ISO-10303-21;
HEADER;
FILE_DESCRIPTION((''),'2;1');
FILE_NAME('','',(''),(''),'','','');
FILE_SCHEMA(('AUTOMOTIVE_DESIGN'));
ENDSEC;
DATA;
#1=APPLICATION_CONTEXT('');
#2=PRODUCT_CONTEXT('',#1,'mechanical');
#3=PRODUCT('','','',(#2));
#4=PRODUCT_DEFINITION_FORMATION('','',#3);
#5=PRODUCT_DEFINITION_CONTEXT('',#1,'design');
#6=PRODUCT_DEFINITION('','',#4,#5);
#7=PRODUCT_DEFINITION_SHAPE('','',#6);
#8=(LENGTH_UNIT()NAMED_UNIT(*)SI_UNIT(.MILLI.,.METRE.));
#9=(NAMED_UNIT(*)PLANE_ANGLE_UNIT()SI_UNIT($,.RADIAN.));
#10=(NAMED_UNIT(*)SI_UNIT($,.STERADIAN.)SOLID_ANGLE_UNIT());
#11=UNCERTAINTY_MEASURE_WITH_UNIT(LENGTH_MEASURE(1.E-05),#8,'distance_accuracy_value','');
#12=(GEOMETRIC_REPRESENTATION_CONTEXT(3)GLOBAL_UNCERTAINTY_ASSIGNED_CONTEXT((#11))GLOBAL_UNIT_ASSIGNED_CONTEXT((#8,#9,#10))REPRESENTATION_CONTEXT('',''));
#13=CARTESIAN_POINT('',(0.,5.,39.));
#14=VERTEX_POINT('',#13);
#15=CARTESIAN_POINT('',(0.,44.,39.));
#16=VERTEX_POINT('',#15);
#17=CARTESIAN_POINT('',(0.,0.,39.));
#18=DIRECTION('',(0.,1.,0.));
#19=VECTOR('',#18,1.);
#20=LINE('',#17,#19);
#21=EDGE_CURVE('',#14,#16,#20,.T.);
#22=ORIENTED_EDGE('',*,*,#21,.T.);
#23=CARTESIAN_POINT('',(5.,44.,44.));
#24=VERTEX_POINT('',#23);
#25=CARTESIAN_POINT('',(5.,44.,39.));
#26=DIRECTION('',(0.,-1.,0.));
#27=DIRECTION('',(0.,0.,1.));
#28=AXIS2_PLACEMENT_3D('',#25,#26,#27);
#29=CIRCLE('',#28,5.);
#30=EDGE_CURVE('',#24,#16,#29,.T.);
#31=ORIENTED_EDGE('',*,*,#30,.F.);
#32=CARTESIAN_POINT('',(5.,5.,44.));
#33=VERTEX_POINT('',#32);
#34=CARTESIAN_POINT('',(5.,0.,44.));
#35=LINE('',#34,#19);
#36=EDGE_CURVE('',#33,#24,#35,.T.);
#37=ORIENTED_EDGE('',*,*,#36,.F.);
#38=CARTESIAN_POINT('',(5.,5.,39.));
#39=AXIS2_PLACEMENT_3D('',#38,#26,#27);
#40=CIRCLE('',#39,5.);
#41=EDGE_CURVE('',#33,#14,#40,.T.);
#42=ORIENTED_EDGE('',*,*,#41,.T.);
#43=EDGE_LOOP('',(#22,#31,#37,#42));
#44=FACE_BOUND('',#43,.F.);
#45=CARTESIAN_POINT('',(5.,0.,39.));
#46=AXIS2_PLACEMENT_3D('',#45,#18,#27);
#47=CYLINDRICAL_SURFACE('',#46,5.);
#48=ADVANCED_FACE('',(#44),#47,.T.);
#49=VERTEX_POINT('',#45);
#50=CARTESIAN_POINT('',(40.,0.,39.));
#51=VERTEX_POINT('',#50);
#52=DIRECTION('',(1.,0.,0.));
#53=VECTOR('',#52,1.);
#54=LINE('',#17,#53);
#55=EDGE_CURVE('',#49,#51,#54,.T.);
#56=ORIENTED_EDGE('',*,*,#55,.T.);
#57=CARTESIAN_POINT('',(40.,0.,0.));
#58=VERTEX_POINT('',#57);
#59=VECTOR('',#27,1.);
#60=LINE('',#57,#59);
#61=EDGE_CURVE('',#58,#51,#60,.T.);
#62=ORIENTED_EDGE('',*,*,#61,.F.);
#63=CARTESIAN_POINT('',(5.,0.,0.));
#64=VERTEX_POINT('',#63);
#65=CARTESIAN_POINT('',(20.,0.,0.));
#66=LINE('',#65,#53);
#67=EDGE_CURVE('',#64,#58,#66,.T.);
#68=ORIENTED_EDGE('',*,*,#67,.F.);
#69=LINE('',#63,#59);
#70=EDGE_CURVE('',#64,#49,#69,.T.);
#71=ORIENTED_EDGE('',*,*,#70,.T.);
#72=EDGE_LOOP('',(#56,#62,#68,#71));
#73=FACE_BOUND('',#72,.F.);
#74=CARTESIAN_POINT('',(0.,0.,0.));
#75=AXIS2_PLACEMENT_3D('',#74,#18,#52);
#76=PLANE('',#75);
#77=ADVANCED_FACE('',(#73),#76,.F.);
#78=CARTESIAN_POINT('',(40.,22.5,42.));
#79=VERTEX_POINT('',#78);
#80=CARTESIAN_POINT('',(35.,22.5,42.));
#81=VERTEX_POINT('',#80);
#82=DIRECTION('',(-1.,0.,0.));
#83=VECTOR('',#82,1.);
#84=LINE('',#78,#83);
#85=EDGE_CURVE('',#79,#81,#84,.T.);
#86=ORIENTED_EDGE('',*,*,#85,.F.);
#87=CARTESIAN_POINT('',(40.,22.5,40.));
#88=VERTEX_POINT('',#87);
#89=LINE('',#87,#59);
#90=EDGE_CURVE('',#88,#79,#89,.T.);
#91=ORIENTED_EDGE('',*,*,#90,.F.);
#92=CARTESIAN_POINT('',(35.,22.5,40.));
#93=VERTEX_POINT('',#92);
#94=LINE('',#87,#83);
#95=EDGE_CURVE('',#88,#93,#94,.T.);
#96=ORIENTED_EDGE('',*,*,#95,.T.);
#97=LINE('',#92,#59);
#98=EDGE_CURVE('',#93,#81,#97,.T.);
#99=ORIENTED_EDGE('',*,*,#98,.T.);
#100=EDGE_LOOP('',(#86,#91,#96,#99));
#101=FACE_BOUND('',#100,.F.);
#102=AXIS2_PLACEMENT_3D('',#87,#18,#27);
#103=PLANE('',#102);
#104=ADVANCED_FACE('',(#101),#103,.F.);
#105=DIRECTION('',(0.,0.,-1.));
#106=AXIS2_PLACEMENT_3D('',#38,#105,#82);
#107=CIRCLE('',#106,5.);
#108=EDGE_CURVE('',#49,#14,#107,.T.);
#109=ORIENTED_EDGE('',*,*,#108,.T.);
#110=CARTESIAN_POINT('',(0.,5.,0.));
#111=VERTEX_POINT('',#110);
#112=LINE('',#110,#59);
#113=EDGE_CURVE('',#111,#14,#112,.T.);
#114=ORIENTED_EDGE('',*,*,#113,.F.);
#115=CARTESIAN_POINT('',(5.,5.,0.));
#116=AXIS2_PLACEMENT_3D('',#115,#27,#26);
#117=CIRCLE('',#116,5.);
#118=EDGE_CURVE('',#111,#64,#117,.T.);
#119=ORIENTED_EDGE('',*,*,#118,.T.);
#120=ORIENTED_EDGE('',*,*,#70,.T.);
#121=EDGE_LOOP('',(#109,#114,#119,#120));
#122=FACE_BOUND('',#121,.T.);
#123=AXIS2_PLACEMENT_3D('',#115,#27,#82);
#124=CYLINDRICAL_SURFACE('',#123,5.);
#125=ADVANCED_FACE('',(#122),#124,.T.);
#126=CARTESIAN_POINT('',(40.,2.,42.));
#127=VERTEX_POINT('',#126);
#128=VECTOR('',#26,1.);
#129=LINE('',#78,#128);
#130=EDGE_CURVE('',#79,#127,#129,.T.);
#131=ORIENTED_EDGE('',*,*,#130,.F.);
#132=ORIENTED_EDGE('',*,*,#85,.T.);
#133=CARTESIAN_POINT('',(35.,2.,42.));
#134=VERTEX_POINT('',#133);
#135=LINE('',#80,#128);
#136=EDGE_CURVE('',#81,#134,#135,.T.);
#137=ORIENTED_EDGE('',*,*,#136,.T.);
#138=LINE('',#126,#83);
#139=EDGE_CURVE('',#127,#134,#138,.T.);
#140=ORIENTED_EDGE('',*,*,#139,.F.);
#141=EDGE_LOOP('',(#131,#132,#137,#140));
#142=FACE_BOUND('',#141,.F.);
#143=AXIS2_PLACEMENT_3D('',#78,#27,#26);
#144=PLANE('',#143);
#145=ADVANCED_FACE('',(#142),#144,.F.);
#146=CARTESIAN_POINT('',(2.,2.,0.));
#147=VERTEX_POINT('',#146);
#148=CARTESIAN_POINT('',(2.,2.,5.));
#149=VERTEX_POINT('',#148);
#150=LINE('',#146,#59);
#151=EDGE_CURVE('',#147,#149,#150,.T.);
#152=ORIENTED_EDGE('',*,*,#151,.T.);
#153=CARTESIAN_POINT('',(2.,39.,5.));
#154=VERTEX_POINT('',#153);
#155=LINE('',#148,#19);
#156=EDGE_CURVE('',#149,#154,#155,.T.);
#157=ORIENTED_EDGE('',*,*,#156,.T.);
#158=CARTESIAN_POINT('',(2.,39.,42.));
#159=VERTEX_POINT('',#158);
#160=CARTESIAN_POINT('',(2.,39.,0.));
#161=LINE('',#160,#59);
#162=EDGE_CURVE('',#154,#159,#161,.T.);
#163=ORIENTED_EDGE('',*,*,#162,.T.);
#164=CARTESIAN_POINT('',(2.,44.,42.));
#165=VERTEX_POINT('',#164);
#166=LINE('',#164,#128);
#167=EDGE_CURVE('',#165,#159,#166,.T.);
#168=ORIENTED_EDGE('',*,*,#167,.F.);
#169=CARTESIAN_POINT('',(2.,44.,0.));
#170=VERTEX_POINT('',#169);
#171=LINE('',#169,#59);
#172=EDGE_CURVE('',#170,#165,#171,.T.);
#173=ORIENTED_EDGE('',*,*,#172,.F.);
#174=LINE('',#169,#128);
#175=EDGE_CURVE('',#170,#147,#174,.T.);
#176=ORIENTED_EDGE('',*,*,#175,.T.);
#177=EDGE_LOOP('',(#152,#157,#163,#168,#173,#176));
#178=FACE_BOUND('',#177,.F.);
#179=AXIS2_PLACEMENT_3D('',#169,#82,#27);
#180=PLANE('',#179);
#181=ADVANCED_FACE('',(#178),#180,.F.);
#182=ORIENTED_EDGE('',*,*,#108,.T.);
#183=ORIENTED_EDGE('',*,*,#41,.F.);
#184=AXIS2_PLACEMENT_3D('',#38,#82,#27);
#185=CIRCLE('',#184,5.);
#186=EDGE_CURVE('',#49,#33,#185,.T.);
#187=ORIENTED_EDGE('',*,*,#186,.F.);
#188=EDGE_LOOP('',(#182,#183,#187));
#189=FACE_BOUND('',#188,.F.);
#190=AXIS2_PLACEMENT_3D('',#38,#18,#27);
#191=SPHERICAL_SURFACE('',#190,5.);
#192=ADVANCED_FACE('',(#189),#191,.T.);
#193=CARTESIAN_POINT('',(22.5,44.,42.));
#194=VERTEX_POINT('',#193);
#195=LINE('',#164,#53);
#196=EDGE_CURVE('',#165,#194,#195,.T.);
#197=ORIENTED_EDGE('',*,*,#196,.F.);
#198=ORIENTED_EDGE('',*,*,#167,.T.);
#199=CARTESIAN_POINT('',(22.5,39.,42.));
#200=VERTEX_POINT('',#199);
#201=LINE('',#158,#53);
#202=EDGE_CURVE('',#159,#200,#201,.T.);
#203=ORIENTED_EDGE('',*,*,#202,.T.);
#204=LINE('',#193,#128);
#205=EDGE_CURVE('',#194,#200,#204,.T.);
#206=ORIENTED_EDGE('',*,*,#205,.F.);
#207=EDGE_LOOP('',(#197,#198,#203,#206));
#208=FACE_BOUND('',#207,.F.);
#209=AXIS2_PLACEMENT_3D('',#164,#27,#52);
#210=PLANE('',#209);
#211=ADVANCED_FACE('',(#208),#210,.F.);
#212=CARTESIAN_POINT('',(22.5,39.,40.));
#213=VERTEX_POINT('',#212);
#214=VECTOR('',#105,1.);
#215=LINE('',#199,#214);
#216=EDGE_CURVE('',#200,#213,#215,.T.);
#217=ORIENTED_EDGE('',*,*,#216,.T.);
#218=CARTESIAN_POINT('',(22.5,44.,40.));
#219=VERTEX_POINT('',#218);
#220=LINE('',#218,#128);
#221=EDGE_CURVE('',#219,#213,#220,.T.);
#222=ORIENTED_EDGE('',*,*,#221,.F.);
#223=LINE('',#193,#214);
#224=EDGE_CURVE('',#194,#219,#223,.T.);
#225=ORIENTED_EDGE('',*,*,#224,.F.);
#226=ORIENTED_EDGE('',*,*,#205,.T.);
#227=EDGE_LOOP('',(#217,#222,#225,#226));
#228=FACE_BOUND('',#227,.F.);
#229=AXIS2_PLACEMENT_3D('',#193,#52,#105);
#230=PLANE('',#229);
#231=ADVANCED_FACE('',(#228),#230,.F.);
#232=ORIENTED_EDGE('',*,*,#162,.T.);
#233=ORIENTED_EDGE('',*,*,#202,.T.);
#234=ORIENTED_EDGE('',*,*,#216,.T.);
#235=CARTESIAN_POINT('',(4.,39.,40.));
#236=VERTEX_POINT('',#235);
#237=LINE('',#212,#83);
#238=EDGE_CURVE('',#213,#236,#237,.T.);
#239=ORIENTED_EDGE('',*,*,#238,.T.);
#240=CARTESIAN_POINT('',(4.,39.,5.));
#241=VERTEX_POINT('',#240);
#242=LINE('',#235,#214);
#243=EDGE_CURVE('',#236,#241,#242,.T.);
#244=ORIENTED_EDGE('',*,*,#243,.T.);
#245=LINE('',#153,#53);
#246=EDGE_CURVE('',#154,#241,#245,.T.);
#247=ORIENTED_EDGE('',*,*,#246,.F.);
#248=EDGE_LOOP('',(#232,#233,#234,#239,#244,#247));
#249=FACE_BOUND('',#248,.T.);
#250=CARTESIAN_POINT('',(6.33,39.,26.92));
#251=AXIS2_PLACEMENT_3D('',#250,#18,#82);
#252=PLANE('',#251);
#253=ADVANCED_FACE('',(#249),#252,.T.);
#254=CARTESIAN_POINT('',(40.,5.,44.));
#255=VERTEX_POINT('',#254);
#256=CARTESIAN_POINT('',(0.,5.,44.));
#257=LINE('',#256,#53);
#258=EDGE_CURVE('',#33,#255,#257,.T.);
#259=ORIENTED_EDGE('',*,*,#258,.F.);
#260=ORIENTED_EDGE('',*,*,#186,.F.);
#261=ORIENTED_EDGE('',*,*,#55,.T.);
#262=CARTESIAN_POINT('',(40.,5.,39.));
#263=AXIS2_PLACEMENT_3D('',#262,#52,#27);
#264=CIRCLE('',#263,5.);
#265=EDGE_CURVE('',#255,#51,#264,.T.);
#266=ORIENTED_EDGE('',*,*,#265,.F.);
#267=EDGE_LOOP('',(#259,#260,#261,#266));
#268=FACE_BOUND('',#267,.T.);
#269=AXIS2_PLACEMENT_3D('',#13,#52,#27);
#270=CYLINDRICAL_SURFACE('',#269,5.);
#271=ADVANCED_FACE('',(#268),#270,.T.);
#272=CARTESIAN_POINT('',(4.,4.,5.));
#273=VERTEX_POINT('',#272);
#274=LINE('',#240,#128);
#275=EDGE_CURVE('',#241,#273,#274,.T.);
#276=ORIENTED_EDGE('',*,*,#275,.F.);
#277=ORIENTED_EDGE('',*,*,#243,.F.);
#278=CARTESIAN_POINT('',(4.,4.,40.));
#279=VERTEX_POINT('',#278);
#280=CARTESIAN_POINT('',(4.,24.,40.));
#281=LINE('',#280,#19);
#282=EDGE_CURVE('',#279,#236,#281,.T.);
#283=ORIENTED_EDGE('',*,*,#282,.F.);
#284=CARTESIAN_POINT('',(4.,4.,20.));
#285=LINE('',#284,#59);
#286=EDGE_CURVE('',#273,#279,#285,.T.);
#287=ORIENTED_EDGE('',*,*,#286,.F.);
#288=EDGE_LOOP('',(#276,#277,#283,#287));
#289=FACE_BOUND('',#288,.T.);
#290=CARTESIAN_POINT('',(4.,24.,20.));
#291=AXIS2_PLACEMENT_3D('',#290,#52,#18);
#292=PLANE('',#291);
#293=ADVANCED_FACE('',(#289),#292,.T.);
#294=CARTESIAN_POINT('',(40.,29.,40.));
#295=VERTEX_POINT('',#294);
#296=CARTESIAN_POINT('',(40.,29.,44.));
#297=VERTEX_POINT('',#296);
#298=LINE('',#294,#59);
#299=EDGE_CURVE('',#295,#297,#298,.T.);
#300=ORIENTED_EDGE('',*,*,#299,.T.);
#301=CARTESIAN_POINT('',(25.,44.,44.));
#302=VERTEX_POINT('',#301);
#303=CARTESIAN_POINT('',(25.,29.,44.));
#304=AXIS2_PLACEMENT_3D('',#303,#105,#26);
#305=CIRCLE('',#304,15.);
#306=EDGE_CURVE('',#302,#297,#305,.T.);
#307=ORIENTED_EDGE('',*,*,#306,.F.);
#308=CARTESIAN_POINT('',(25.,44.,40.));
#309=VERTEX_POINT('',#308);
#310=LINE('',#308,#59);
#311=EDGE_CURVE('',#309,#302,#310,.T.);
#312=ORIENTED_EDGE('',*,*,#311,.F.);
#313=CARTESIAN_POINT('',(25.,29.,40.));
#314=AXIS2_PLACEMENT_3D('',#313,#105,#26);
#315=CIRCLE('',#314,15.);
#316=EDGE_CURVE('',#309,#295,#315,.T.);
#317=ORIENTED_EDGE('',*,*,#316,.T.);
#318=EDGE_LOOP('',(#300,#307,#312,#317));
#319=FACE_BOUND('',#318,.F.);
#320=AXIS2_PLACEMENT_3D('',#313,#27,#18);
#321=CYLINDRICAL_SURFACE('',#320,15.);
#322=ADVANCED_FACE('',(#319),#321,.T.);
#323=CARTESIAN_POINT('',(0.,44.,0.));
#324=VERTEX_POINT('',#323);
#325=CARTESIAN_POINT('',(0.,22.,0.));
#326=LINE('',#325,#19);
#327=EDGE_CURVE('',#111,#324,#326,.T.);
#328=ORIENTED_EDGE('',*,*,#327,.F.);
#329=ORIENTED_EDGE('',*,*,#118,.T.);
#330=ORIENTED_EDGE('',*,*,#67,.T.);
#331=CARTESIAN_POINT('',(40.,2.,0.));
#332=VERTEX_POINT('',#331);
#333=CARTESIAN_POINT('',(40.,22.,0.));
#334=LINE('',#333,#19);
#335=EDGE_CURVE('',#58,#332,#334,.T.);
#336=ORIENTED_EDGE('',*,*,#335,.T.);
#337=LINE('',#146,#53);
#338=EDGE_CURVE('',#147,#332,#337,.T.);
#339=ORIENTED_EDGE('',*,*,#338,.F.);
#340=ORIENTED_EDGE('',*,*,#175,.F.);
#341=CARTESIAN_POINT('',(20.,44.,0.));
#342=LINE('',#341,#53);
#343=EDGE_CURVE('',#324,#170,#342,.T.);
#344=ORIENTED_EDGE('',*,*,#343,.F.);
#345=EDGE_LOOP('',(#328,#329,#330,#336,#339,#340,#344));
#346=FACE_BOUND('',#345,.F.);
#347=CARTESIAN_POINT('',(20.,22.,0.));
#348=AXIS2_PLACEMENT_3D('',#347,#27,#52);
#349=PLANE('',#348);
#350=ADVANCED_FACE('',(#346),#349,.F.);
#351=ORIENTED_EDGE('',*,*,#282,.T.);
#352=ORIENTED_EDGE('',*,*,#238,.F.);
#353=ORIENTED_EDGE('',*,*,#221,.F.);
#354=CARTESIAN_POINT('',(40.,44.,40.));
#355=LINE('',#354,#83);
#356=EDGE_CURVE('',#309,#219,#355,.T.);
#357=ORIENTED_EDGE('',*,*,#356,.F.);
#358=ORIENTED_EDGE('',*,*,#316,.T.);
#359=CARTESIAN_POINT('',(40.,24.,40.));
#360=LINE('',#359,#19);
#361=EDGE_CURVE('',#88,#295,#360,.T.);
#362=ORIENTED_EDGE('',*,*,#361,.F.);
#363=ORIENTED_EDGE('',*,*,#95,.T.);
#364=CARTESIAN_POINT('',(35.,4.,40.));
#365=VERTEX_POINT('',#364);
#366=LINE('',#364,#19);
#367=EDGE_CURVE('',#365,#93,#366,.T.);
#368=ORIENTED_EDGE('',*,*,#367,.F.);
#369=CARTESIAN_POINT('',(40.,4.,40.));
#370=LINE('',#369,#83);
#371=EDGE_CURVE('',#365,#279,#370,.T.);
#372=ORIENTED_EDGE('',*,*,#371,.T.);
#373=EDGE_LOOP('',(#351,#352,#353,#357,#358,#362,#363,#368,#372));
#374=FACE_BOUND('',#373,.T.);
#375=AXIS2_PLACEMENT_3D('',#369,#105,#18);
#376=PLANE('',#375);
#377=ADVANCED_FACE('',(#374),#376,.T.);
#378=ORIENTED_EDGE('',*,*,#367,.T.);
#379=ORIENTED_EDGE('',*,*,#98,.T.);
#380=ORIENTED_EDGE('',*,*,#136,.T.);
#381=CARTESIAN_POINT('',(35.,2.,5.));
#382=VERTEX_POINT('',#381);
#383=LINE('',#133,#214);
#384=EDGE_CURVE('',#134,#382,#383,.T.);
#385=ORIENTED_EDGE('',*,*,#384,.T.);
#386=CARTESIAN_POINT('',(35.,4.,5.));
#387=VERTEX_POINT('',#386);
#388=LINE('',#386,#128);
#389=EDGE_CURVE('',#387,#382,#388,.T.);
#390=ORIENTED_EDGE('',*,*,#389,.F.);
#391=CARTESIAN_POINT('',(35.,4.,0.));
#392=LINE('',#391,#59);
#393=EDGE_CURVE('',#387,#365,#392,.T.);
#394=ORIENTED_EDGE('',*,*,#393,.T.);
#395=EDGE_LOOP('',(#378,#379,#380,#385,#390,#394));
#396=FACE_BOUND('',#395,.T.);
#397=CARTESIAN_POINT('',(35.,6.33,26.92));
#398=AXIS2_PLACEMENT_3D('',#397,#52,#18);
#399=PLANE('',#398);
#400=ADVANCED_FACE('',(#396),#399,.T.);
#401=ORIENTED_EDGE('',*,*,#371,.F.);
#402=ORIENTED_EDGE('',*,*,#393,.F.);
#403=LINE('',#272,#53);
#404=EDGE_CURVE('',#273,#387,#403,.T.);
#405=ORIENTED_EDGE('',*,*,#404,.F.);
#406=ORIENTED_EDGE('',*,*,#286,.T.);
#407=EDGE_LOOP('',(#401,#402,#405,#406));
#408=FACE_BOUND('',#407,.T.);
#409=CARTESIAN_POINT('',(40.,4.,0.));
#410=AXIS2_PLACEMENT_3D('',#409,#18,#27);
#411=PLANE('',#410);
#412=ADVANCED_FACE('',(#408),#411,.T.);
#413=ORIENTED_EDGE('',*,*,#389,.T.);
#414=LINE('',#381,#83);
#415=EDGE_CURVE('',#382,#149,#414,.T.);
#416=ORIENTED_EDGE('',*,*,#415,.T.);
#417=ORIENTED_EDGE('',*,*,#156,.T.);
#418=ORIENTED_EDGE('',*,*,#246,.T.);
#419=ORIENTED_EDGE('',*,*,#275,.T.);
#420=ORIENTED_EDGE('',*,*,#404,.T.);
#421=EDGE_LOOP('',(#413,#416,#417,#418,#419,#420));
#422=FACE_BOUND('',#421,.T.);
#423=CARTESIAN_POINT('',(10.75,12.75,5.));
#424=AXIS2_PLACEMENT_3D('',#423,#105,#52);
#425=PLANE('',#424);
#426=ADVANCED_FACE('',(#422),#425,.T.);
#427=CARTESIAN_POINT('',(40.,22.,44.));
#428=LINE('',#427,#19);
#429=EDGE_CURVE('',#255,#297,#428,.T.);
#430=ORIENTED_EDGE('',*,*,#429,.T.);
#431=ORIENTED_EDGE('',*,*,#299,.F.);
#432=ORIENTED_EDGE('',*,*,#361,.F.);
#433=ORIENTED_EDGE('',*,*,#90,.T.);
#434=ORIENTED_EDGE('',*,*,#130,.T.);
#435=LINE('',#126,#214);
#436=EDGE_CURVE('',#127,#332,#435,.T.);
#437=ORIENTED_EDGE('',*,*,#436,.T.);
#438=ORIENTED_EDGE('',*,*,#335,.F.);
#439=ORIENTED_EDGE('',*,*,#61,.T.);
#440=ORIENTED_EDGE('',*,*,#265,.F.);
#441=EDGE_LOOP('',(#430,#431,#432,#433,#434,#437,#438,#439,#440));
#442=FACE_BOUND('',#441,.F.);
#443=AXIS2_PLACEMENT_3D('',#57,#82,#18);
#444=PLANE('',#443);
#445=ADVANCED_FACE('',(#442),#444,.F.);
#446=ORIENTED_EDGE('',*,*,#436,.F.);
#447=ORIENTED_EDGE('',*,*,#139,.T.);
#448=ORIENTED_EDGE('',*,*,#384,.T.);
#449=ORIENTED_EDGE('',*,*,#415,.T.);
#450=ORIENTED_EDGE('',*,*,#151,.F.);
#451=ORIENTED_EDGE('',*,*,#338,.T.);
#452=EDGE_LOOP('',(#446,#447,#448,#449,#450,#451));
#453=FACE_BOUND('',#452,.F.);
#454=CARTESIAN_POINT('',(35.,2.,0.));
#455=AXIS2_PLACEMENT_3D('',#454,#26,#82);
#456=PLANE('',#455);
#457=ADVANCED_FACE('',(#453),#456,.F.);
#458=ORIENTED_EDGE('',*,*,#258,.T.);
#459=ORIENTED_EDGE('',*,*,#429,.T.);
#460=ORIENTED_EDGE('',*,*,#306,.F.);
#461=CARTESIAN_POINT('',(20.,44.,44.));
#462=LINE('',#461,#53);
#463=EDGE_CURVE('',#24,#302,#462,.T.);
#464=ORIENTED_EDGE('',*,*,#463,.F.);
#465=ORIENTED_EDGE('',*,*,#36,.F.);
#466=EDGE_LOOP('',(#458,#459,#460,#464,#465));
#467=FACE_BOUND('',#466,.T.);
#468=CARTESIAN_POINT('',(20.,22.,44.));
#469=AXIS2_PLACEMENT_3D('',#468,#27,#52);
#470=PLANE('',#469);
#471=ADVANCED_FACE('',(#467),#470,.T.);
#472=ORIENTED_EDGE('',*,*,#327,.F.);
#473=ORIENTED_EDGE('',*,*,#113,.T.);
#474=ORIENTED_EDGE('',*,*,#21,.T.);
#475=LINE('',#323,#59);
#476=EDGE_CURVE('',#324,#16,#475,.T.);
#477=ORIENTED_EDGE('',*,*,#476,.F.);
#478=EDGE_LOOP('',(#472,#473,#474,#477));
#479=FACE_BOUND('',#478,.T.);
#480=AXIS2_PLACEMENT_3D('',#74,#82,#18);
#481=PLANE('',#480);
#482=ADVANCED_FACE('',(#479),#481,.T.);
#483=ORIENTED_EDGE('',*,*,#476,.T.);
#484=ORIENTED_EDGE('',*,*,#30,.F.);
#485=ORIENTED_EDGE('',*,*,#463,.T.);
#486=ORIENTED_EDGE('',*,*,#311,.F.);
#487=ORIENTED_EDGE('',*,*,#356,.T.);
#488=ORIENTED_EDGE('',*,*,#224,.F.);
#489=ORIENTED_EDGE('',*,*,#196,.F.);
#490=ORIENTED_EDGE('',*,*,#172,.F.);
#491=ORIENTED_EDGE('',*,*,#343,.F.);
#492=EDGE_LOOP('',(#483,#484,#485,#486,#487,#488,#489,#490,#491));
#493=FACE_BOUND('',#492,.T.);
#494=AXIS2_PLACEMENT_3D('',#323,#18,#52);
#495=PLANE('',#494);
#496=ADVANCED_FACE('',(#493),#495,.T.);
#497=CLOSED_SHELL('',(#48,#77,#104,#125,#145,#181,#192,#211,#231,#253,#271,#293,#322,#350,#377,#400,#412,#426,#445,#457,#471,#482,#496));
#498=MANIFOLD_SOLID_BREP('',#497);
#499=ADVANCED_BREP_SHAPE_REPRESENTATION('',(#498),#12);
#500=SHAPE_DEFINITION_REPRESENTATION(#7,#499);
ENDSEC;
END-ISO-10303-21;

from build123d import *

# Parameters (mm, degrees)
F0_W      = 40
F0_H      = 44
F1_DEPTH  = 44
F2_W      = 40
F2_H      = 40
F3_DEPTH  = 36
F5_DEPTH  = 5
F7_DEPTH  = 5
F8_R      = 15
F9_R      = 5
F11_DEPTH = 5


# Not quite as in the source:
# - a feature names something its author has since deleted; it is built from what else it names


with BuildPart() as f1:
    # F0 (on Top) → F1 (new body)
    with BuildSketch(Plane.XY):
        with Locations((20, 22)):
            Rectangle(F0_W, F0_H)
    extrude(amount=F1_DEPTH)

    # F2 (on face) → F3 (cut)
    with BuildSketch(Plane.YZ.offset(40)):
        with Locations((24, 20)):
            Rectangle(F2_W, F2_H)
    extrude(amount=-F3_DEPTH, mode=Mode.SUBTRACT)

    # F4 (on face) → F5 (cut)
    with BuildSketch(Plane.YZ.offset(40)):
        Polygon((2, 42), (2, 0), (4, 0), (4, 40), (22.5, 40), (22.5, 42), align=None)
    extrude(amount=-F5_DEPTH, mode=Mode.SUBTRACT)

    # F6 (on face) → F7 (cut)
    with BuildSketch(Plane(origin=(0, 44, 0), x_dir=(-1, 0, 0), z_dir=(0, 1, 0))):
        Polygon((-4, 40), (-4, 0), (-2, 0), (-2, 42), (-22.5, 42), (-22.5, 40), align=None)
    extrude(amount=-F7_DEPTH, mode=Mode.SUBTRACT)

    # F8
    f8_edges = [f1.edges().sort_by_distance(p)[0] for p in [
        (40, 44, 42),
    ]]
    fillet(f8_edges, radius=F8_R)

    # F9
    f9_edges = [f1.edges().sort_by_distance(p)[0] for p in [
        (0, 22, 44),
        (20, 0, 44),
        (0, 0, 22),
    ]]
    fillet(f9_edges, radius=F9_R)

    # F10 (on face) → F11 (cut)
    with BuildSketch(Plane(origin=(0, 0, 0), x_dir=(1, 0, 0), z_dir=(0, 0, -1))):
        Polygon((35, -4), (35, -2), (2, -2), (2, -39), (4, -39), (4, -4), align=None)
    extrude(amount=-F11_DEPTH, mode=Mode.SUBTRACT)


solid = f1.part
